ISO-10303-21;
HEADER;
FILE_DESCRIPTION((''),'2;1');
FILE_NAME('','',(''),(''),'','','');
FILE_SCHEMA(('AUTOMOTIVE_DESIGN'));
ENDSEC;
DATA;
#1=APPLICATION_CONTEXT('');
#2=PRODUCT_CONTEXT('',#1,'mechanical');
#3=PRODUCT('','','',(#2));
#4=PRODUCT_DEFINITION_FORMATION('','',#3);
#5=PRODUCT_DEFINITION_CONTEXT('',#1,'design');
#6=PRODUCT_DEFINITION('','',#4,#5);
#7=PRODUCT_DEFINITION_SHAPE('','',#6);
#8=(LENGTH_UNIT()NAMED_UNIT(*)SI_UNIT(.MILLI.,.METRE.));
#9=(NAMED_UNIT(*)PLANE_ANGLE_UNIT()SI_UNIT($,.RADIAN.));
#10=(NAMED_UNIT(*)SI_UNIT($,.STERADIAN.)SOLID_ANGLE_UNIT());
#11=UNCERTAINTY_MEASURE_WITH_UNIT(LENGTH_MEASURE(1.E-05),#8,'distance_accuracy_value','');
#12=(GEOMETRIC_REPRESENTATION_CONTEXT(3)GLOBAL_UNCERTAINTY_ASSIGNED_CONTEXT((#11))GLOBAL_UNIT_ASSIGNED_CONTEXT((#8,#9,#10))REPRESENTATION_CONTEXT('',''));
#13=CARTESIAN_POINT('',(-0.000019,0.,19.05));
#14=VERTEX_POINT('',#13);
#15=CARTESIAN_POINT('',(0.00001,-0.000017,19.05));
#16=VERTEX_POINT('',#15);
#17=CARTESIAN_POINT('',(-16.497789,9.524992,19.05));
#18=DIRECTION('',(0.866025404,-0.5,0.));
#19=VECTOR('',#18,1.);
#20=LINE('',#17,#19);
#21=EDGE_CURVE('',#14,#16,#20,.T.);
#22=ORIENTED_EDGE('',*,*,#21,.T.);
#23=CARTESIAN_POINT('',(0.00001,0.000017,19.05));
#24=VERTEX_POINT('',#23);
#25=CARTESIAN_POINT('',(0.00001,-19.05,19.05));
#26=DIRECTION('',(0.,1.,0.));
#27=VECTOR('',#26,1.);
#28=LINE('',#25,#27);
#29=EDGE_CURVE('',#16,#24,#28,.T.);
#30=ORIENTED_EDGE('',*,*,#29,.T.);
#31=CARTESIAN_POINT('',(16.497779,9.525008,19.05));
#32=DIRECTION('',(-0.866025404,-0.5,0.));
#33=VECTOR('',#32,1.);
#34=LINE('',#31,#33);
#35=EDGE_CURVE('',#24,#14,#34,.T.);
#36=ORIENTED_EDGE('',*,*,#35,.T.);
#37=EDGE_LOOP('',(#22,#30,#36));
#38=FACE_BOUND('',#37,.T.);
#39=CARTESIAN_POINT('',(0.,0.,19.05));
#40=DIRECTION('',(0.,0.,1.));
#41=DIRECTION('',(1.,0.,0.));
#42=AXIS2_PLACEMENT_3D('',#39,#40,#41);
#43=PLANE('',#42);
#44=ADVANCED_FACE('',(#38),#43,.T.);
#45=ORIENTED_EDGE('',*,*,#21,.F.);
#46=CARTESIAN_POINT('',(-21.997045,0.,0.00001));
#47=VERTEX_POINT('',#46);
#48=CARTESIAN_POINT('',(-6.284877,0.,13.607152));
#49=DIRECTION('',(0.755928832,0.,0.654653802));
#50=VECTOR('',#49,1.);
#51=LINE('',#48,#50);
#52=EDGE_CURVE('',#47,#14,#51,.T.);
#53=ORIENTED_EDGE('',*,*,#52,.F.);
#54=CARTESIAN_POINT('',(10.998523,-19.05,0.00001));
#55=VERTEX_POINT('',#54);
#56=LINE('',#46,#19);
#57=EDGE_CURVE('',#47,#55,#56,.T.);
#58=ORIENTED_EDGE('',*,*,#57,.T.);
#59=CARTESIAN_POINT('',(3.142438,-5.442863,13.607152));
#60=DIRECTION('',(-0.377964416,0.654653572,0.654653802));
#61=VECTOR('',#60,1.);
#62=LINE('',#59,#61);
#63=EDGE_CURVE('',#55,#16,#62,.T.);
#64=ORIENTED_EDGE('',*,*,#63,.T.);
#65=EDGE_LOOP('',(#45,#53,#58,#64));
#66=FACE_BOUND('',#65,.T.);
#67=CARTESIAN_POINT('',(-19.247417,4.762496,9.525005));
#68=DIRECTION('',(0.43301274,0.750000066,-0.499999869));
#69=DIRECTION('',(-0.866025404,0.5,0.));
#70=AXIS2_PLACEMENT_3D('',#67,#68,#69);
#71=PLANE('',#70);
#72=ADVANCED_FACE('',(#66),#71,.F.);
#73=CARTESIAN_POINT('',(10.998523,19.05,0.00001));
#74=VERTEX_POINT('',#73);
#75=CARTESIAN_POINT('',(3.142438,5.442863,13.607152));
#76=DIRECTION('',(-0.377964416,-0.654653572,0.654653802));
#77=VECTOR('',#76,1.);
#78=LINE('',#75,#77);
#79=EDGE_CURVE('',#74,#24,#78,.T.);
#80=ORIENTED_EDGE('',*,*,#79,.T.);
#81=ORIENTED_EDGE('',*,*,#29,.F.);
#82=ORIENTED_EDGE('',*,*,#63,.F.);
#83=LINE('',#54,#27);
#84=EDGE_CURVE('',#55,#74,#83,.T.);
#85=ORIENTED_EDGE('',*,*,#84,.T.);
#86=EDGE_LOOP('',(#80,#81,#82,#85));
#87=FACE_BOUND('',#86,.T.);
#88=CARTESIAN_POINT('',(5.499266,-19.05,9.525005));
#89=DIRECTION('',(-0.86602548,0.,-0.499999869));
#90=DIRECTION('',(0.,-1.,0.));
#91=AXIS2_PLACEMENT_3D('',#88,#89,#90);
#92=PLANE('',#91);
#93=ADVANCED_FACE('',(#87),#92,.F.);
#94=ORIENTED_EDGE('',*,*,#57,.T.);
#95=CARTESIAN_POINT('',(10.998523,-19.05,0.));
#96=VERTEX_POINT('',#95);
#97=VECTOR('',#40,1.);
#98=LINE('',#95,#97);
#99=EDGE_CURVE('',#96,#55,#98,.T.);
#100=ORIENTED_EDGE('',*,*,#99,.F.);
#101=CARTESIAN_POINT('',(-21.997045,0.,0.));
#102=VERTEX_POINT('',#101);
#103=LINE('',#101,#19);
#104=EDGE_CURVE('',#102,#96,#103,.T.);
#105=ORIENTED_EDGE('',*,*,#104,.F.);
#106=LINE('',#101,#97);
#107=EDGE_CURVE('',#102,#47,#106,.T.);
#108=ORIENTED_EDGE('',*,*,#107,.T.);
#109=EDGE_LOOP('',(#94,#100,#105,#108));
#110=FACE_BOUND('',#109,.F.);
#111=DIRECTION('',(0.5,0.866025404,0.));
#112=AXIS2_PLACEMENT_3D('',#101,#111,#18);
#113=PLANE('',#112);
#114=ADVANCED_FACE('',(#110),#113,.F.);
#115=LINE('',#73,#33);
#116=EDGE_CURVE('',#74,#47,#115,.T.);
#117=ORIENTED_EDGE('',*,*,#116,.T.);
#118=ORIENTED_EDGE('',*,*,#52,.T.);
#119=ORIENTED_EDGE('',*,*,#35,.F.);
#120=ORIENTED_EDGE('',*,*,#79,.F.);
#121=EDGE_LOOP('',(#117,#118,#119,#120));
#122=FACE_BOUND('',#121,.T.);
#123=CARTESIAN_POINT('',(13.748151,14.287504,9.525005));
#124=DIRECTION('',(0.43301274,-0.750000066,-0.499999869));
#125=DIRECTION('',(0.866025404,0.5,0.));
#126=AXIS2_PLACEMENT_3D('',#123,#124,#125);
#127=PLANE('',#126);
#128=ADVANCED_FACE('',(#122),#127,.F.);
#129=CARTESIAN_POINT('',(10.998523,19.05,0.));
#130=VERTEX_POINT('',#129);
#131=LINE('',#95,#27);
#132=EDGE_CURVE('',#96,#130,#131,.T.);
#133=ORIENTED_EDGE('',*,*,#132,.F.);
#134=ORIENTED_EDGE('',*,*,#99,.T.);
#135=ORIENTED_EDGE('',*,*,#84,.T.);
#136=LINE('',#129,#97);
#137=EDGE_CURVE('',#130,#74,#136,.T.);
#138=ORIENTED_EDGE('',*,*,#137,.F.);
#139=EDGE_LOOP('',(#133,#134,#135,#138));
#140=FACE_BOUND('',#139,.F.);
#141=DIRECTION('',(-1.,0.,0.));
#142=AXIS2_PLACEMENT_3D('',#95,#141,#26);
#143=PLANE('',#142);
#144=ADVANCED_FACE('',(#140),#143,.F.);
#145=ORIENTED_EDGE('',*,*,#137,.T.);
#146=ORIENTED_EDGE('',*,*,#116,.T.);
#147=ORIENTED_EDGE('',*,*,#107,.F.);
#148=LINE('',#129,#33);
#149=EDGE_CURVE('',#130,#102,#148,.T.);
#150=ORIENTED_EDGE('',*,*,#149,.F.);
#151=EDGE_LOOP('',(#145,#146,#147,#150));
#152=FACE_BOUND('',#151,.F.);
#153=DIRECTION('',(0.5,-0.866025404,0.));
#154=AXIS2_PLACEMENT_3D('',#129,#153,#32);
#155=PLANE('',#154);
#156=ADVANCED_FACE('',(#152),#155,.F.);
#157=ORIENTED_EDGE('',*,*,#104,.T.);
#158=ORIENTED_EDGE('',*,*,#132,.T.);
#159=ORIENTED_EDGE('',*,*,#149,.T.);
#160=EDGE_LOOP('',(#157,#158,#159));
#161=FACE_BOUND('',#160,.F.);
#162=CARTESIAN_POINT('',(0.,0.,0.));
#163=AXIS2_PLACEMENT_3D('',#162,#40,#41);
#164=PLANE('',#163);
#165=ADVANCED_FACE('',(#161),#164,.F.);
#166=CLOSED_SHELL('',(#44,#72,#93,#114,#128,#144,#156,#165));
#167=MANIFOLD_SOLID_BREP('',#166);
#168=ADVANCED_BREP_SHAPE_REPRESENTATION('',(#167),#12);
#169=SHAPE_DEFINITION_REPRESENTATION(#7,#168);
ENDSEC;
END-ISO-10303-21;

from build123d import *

# Parameters (mm, degrees)
F1_DEPTH = 19.05
F2_SIZE2 = 10.998513
F2_SIZE  = 19.04999


# Not quite as in the source:
# - a fillet or chamfer is up to 0.001 mm smaller than in the source, because OpenCascade refuses the exact size


with BuildPart() as f1:
    # F0 (on Top) → F1 (new body)
    with BuildSketch(Plane.XY):
        Polygon((10.9985226281, -19.05), (10.9985226281, 19.05), (-21.9970452561, 0), align=None)
    extrude(amount=F1_DEPTH)

    # F2 (size 19.05 and 10.9985226281 in the source; OpenCascade refuses exactly that, so slightly less here)
    f2_edges = [f1.edges().sort_by_distance(p)[0] for p in [
        (-5.499261, -9.525, 19.05),
        (-5.499261, 9.525, 19.05),
        (10.998523, 0, 19.05),
    ]]
    chamfer(f2_edges, length=F2_SIZE, length2=F2_SIZE2)


solid = f1.part
